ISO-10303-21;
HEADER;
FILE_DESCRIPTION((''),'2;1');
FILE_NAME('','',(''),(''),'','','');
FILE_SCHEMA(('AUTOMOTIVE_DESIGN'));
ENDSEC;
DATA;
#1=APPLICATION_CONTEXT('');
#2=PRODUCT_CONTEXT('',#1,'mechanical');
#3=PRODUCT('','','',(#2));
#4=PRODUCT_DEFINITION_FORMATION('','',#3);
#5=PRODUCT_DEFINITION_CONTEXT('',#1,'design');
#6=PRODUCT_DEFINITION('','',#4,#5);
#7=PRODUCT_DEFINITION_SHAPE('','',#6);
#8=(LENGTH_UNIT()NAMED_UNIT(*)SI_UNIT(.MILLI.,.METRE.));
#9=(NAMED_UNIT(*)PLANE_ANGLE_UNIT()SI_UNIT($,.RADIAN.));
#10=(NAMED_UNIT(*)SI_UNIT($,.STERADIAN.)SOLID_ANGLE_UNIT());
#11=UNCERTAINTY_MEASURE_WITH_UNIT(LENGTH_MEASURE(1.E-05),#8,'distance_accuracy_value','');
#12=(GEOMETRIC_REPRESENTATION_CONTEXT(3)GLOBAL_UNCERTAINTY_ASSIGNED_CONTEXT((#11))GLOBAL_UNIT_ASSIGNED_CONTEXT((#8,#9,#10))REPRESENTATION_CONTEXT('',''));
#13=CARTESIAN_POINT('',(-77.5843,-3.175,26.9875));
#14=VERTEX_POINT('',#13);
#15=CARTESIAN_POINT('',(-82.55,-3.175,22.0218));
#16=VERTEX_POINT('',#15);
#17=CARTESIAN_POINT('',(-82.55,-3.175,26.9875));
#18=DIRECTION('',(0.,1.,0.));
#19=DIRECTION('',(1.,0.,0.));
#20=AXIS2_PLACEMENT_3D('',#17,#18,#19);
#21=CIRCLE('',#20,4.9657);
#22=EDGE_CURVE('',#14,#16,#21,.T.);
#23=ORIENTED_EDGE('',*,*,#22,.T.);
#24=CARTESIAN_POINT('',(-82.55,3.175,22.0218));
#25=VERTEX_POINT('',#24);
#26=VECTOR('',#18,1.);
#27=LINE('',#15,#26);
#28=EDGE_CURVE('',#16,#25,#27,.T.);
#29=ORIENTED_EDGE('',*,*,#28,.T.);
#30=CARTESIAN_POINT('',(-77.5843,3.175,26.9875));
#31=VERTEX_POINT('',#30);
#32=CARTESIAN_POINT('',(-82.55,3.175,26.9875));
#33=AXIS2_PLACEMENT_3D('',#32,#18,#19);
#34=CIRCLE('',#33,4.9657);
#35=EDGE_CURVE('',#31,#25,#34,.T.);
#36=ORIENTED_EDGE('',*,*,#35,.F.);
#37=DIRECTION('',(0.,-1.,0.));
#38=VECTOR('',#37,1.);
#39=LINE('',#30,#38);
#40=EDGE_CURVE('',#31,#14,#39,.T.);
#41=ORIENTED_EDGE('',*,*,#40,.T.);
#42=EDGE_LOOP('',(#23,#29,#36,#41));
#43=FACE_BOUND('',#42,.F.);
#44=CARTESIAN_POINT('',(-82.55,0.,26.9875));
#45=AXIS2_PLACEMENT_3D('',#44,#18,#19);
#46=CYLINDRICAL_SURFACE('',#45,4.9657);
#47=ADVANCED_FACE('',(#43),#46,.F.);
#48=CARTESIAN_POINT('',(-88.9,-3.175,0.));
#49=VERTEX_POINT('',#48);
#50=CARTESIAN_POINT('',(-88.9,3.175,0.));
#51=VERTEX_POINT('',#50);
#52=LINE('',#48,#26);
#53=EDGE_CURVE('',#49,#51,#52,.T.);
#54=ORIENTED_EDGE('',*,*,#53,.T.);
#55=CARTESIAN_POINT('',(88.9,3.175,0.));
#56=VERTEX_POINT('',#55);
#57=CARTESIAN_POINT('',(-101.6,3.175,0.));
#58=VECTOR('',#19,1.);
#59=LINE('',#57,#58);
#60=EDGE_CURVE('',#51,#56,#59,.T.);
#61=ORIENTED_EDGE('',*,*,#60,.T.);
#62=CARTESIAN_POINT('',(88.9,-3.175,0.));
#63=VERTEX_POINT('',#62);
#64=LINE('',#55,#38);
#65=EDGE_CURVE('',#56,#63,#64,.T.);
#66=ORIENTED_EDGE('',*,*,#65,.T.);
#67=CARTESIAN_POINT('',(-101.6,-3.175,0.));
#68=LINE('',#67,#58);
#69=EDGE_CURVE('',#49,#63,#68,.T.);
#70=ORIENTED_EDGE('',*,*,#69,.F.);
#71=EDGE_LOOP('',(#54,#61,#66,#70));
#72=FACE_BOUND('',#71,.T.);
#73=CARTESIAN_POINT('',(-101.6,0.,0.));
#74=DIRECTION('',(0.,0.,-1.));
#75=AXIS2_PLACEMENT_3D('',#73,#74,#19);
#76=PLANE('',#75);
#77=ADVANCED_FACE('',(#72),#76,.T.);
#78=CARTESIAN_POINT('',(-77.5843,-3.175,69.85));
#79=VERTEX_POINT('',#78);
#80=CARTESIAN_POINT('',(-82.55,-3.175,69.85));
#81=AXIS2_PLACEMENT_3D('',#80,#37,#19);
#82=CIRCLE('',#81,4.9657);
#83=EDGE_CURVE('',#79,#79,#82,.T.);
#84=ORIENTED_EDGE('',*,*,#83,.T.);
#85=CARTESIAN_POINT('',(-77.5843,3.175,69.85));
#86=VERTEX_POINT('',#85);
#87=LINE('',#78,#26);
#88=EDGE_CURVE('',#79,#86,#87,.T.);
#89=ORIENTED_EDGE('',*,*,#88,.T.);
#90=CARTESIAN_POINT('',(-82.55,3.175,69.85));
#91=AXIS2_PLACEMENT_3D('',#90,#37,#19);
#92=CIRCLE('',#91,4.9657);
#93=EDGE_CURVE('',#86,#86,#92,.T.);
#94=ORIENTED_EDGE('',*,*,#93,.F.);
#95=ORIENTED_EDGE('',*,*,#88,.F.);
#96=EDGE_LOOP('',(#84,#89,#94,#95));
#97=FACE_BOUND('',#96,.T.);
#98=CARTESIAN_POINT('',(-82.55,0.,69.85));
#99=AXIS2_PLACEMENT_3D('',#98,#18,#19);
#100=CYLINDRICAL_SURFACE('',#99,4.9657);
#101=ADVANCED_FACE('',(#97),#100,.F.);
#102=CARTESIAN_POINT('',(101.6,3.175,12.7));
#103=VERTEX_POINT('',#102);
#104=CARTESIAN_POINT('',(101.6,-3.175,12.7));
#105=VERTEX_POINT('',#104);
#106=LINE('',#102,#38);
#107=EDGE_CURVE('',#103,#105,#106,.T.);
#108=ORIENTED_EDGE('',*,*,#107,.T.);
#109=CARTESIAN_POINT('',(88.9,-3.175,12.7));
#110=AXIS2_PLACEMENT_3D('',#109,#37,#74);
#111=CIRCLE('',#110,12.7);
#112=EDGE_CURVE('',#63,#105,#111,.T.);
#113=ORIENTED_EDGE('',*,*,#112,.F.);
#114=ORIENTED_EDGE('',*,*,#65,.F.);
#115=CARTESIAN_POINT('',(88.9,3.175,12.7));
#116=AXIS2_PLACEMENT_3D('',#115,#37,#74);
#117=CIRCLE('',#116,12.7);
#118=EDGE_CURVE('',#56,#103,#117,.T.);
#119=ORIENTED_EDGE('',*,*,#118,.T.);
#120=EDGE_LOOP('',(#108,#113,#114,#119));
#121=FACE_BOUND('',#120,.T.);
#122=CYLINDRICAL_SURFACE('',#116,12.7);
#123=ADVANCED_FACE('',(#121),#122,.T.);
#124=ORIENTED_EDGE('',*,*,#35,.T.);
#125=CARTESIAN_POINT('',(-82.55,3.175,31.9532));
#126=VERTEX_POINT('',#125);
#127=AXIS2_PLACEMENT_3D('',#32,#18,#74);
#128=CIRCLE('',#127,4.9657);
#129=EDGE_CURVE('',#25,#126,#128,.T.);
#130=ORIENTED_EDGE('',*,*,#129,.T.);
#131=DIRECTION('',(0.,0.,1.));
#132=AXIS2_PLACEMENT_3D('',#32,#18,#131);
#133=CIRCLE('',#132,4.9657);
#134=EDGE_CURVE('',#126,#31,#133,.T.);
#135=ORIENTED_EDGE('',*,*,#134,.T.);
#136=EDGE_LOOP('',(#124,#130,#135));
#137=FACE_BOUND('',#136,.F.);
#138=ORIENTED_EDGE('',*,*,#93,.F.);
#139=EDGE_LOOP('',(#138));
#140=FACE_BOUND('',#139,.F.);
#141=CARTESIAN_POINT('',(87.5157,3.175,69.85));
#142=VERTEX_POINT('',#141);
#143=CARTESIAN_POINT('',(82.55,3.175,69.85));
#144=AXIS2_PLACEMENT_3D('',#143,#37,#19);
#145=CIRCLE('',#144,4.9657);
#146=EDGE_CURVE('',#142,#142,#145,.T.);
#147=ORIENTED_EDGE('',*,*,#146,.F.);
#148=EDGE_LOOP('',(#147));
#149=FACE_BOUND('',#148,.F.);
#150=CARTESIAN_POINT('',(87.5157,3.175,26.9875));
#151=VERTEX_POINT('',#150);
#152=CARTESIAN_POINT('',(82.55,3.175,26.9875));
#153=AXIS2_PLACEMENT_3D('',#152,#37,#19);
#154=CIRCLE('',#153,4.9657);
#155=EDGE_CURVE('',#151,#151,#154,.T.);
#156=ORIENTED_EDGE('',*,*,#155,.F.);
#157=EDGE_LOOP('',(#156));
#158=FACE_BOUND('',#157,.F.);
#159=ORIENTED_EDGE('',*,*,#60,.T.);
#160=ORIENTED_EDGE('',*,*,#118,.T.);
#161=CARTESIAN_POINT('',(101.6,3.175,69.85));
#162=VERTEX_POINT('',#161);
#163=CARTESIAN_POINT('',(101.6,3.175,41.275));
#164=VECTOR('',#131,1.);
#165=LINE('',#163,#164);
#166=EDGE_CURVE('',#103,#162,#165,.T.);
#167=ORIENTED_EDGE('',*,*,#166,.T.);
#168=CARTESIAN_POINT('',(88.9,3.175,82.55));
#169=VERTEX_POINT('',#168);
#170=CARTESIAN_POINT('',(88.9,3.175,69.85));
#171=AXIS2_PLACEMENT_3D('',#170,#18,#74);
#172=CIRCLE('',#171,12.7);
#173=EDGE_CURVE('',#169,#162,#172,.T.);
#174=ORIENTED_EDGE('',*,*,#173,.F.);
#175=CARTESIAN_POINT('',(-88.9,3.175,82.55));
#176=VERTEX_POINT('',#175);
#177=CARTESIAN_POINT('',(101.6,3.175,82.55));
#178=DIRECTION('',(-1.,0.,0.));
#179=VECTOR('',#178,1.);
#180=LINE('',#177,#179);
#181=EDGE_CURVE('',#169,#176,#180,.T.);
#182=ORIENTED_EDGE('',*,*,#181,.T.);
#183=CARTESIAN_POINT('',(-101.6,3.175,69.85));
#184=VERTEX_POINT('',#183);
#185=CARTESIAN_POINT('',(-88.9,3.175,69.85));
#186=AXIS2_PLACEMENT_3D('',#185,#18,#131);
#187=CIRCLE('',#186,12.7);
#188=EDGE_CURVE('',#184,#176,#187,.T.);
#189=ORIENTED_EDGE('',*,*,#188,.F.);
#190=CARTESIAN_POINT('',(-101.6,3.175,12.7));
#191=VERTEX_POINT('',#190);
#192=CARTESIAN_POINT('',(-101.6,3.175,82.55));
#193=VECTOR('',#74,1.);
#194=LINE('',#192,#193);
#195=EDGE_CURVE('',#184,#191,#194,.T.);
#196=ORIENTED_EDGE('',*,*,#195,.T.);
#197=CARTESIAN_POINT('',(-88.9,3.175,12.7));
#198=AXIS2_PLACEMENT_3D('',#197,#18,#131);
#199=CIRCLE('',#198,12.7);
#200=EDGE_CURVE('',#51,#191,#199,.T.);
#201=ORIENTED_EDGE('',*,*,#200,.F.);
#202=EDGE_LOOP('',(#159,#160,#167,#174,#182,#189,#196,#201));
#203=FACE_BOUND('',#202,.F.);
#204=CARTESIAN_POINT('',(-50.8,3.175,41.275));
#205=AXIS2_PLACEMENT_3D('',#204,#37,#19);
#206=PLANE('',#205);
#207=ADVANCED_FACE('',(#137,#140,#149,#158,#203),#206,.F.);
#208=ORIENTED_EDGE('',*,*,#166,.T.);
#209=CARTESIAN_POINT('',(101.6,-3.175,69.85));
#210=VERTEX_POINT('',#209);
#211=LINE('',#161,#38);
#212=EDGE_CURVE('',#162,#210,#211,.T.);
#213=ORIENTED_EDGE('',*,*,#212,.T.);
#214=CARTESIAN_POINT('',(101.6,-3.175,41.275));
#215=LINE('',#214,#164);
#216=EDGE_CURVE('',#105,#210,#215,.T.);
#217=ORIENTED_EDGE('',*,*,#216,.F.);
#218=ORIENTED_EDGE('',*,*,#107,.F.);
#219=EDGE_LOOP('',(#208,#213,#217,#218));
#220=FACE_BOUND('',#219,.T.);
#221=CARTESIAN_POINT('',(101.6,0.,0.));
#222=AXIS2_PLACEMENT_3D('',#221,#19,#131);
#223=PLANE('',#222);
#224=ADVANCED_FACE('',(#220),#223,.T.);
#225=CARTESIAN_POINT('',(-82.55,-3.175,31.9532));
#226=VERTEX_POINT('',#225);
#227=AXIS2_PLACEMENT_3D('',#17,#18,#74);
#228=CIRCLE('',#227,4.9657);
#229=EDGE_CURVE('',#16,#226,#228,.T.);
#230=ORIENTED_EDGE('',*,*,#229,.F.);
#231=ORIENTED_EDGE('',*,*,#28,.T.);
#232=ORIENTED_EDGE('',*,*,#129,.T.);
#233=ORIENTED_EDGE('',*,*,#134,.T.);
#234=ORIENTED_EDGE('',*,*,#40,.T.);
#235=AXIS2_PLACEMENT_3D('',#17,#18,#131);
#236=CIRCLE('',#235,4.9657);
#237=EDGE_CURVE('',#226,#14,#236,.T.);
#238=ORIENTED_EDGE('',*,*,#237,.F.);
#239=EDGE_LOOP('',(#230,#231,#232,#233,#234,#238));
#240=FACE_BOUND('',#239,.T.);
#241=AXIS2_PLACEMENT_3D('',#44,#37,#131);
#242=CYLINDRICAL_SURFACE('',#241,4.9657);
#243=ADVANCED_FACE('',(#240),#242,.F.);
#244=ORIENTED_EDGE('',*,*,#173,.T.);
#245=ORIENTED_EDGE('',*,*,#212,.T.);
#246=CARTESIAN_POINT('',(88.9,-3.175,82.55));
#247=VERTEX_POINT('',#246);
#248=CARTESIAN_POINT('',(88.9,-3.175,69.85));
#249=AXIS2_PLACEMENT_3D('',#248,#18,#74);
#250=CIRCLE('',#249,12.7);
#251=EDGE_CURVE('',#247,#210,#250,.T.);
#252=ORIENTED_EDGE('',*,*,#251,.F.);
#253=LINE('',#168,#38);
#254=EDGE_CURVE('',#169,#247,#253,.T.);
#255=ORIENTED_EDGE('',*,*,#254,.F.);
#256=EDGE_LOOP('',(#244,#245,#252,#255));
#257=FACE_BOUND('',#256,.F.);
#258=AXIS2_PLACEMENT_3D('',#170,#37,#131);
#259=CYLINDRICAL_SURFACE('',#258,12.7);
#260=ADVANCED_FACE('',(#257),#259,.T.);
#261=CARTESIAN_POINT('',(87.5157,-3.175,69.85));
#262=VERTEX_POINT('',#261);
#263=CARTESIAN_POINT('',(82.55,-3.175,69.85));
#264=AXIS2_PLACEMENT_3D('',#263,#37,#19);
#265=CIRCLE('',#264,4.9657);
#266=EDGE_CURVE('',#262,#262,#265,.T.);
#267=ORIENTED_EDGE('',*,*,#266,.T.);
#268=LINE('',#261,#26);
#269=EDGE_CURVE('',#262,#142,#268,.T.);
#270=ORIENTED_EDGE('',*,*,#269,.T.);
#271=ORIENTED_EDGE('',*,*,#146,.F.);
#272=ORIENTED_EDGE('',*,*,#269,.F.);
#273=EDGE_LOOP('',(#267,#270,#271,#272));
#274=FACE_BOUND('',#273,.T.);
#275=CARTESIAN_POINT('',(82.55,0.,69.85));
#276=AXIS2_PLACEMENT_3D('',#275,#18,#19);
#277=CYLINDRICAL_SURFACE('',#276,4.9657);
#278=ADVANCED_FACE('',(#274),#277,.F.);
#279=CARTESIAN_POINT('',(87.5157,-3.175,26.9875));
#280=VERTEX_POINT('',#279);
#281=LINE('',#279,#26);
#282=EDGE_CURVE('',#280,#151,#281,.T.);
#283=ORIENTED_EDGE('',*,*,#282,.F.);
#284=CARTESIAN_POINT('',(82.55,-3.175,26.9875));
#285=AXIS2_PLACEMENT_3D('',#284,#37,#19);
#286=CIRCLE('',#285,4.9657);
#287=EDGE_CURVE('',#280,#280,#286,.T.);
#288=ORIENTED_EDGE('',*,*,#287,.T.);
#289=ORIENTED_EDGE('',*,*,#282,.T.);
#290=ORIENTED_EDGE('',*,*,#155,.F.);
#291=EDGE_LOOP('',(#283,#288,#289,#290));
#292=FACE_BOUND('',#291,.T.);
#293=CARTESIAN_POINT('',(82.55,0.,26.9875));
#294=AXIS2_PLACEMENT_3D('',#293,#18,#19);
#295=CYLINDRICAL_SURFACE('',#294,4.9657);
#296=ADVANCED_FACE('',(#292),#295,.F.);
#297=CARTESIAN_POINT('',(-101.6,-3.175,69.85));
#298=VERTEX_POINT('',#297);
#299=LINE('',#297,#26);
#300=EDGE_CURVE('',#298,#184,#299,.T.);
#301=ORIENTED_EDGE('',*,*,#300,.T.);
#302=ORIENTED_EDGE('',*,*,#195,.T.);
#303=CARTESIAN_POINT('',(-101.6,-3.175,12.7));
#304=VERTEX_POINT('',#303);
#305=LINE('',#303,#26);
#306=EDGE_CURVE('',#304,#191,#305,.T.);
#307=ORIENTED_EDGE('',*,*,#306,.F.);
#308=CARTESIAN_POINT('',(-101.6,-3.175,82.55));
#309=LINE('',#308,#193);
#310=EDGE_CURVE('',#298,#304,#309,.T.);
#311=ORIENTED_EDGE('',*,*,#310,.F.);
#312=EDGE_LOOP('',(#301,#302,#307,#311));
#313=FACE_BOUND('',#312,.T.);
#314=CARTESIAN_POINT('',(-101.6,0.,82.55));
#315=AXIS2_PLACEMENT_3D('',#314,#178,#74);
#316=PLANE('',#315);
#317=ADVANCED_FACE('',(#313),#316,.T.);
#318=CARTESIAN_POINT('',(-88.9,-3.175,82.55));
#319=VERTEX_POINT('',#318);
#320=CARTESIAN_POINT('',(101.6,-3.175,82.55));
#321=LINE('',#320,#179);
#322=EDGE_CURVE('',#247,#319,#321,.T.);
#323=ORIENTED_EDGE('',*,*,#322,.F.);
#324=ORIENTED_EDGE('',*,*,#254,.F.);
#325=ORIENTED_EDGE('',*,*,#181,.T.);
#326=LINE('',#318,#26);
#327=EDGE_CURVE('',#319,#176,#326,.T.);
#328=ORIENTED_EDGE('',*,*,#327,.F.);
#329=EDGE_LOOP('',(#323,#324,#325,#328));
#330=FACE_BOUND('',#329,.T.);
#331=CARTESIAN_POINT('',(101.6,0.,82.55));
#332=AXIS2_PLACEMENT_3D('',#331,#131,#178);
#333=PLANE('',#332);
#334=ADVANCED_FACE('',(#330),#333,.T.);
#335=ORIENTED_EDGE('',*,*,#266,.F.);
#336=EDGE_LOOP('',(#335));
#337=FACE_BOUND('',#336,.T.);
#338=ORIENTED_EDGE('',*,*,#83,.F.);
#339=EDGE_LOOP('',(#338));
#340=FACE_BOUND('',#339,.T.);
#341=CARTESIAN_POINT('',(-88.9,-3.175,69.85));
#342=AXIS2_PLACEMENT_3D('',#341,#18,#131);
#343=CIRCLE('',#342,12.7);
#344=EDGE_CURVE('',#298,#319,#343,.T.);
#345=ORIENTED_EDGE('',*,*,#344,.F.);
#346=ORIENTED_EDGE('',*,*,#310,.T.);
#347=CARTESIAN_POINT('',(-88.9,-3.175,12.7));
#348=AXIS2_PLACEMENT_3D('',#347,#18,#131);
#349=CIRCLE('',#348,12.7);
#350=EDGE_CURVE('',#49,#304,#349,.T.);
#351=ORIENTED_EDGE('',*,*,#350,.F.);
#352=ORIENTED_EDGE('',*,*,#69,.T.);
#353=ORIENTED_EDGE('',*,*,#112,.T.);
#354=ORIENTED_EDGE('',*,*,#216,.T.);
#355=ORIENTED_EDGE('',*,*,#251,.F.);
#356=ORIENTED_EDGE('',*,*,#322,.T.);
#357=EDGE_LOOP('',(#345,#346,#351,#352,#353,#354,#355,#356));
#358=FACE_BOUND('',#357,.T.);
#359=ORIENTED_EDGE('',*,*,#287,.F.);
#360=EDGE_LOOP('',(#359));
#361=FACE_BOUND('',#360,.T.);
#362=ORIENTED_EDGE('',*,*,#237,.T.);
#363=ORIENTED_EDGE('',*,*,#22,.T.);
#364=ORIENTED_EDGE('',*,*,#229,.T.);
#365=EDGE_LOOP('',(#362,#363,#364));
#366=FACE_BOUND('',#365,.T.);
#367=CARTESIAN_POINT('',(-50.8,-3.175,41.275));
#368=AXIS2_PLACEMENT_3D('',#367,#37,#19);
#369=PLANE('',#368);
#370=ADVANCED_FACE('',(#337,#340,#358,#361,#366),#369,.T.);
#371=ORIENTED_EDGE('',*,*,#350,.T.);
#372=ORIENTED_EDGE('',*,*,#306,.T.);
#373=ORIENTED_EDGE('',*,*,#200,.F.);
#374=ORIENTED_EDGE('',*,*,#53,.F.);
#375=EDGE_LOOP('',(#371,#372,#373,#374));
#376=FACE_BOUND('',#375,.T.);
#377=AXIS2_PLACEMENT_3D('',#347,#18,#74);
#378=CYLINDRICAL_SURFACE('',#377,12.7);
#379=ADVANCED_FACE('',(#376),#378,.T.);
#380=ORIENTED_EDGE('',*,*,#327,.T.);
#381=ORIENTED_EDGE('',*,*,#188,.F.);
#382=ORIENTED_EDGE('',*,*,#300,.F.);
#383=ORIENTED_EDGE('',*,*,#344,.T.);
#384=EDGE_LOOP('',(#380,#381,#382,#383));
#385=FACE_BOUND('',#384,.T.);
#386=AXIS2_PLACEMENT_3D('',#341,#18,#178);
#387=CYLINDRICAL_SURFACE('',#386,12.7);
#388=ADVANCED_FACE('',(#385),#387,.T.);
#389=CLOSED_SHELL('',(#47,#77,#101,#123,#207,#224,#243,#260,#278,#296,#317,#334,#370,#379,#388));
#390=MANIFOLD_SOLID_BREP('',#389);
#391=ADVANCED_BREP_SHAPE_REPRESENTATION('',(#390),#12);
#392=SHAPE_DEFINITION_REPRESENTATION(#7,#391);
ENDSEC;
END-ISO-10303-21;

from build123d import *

# Parameters (mm, degrees)
F0_R     = 4.9657
F0_W     = 101.6
F0_H     = 82.55
F1_DEPTH = 3.175
F2_R     = 12.7


with BuildPart() as f1:
    # F0 (on Front) → F1 (new body, symmetric)
    with BuildSketch(Plane.XZ):
        Polygon((-82.55, 0), (0, 0), (0, 82.55), (-101.6, 82.55), (-101.6, 0), align=None)
        with BuildLine():
            ThreePointArc((-77.5843, 26.9875), (-79.0387198567, 23.4762198567), (-82.55, 22.0218))
            ThreePointArc((-82.55, 22.0218), (-87.5157, 26.9875), (-82.55, 31.9532))
            ThreePointArc((-82.55, 31.9532), (-79.0387198567, 30.4987801433), (-77.5843, 26.9875))
        make_face(mode=Mode.SUBTRACT)
        with Locations((-82.55, 69.85)):
            Circle(F0_R, mode=Mode.SUBTRACT)
        with Locations((50.8, 41.275)):
            Rectangle(F0_W, F0_H)
        with Locations((82.55, 26.9875)):
            Circle(F0_R, mode=Mode.SUBTRACT)
        with Locations((82.55, 69.85)):
            Circle(F0_R, mode=Mode.SUBTRACT)
    extrude(amount=F1_DEPTH, both=True)

    # F2
    f2_edges = [f1.edges().sort_by_distance(p)[0] for p in [
        (-101.6, 0, 82.55),
        (101.6, 0, 0),
        (101.6, 0, 82.55),
        (-101.6, 0, 0),
    ]]
    fillet(f2_edges, radius=F2_R)


solid = f1.part
